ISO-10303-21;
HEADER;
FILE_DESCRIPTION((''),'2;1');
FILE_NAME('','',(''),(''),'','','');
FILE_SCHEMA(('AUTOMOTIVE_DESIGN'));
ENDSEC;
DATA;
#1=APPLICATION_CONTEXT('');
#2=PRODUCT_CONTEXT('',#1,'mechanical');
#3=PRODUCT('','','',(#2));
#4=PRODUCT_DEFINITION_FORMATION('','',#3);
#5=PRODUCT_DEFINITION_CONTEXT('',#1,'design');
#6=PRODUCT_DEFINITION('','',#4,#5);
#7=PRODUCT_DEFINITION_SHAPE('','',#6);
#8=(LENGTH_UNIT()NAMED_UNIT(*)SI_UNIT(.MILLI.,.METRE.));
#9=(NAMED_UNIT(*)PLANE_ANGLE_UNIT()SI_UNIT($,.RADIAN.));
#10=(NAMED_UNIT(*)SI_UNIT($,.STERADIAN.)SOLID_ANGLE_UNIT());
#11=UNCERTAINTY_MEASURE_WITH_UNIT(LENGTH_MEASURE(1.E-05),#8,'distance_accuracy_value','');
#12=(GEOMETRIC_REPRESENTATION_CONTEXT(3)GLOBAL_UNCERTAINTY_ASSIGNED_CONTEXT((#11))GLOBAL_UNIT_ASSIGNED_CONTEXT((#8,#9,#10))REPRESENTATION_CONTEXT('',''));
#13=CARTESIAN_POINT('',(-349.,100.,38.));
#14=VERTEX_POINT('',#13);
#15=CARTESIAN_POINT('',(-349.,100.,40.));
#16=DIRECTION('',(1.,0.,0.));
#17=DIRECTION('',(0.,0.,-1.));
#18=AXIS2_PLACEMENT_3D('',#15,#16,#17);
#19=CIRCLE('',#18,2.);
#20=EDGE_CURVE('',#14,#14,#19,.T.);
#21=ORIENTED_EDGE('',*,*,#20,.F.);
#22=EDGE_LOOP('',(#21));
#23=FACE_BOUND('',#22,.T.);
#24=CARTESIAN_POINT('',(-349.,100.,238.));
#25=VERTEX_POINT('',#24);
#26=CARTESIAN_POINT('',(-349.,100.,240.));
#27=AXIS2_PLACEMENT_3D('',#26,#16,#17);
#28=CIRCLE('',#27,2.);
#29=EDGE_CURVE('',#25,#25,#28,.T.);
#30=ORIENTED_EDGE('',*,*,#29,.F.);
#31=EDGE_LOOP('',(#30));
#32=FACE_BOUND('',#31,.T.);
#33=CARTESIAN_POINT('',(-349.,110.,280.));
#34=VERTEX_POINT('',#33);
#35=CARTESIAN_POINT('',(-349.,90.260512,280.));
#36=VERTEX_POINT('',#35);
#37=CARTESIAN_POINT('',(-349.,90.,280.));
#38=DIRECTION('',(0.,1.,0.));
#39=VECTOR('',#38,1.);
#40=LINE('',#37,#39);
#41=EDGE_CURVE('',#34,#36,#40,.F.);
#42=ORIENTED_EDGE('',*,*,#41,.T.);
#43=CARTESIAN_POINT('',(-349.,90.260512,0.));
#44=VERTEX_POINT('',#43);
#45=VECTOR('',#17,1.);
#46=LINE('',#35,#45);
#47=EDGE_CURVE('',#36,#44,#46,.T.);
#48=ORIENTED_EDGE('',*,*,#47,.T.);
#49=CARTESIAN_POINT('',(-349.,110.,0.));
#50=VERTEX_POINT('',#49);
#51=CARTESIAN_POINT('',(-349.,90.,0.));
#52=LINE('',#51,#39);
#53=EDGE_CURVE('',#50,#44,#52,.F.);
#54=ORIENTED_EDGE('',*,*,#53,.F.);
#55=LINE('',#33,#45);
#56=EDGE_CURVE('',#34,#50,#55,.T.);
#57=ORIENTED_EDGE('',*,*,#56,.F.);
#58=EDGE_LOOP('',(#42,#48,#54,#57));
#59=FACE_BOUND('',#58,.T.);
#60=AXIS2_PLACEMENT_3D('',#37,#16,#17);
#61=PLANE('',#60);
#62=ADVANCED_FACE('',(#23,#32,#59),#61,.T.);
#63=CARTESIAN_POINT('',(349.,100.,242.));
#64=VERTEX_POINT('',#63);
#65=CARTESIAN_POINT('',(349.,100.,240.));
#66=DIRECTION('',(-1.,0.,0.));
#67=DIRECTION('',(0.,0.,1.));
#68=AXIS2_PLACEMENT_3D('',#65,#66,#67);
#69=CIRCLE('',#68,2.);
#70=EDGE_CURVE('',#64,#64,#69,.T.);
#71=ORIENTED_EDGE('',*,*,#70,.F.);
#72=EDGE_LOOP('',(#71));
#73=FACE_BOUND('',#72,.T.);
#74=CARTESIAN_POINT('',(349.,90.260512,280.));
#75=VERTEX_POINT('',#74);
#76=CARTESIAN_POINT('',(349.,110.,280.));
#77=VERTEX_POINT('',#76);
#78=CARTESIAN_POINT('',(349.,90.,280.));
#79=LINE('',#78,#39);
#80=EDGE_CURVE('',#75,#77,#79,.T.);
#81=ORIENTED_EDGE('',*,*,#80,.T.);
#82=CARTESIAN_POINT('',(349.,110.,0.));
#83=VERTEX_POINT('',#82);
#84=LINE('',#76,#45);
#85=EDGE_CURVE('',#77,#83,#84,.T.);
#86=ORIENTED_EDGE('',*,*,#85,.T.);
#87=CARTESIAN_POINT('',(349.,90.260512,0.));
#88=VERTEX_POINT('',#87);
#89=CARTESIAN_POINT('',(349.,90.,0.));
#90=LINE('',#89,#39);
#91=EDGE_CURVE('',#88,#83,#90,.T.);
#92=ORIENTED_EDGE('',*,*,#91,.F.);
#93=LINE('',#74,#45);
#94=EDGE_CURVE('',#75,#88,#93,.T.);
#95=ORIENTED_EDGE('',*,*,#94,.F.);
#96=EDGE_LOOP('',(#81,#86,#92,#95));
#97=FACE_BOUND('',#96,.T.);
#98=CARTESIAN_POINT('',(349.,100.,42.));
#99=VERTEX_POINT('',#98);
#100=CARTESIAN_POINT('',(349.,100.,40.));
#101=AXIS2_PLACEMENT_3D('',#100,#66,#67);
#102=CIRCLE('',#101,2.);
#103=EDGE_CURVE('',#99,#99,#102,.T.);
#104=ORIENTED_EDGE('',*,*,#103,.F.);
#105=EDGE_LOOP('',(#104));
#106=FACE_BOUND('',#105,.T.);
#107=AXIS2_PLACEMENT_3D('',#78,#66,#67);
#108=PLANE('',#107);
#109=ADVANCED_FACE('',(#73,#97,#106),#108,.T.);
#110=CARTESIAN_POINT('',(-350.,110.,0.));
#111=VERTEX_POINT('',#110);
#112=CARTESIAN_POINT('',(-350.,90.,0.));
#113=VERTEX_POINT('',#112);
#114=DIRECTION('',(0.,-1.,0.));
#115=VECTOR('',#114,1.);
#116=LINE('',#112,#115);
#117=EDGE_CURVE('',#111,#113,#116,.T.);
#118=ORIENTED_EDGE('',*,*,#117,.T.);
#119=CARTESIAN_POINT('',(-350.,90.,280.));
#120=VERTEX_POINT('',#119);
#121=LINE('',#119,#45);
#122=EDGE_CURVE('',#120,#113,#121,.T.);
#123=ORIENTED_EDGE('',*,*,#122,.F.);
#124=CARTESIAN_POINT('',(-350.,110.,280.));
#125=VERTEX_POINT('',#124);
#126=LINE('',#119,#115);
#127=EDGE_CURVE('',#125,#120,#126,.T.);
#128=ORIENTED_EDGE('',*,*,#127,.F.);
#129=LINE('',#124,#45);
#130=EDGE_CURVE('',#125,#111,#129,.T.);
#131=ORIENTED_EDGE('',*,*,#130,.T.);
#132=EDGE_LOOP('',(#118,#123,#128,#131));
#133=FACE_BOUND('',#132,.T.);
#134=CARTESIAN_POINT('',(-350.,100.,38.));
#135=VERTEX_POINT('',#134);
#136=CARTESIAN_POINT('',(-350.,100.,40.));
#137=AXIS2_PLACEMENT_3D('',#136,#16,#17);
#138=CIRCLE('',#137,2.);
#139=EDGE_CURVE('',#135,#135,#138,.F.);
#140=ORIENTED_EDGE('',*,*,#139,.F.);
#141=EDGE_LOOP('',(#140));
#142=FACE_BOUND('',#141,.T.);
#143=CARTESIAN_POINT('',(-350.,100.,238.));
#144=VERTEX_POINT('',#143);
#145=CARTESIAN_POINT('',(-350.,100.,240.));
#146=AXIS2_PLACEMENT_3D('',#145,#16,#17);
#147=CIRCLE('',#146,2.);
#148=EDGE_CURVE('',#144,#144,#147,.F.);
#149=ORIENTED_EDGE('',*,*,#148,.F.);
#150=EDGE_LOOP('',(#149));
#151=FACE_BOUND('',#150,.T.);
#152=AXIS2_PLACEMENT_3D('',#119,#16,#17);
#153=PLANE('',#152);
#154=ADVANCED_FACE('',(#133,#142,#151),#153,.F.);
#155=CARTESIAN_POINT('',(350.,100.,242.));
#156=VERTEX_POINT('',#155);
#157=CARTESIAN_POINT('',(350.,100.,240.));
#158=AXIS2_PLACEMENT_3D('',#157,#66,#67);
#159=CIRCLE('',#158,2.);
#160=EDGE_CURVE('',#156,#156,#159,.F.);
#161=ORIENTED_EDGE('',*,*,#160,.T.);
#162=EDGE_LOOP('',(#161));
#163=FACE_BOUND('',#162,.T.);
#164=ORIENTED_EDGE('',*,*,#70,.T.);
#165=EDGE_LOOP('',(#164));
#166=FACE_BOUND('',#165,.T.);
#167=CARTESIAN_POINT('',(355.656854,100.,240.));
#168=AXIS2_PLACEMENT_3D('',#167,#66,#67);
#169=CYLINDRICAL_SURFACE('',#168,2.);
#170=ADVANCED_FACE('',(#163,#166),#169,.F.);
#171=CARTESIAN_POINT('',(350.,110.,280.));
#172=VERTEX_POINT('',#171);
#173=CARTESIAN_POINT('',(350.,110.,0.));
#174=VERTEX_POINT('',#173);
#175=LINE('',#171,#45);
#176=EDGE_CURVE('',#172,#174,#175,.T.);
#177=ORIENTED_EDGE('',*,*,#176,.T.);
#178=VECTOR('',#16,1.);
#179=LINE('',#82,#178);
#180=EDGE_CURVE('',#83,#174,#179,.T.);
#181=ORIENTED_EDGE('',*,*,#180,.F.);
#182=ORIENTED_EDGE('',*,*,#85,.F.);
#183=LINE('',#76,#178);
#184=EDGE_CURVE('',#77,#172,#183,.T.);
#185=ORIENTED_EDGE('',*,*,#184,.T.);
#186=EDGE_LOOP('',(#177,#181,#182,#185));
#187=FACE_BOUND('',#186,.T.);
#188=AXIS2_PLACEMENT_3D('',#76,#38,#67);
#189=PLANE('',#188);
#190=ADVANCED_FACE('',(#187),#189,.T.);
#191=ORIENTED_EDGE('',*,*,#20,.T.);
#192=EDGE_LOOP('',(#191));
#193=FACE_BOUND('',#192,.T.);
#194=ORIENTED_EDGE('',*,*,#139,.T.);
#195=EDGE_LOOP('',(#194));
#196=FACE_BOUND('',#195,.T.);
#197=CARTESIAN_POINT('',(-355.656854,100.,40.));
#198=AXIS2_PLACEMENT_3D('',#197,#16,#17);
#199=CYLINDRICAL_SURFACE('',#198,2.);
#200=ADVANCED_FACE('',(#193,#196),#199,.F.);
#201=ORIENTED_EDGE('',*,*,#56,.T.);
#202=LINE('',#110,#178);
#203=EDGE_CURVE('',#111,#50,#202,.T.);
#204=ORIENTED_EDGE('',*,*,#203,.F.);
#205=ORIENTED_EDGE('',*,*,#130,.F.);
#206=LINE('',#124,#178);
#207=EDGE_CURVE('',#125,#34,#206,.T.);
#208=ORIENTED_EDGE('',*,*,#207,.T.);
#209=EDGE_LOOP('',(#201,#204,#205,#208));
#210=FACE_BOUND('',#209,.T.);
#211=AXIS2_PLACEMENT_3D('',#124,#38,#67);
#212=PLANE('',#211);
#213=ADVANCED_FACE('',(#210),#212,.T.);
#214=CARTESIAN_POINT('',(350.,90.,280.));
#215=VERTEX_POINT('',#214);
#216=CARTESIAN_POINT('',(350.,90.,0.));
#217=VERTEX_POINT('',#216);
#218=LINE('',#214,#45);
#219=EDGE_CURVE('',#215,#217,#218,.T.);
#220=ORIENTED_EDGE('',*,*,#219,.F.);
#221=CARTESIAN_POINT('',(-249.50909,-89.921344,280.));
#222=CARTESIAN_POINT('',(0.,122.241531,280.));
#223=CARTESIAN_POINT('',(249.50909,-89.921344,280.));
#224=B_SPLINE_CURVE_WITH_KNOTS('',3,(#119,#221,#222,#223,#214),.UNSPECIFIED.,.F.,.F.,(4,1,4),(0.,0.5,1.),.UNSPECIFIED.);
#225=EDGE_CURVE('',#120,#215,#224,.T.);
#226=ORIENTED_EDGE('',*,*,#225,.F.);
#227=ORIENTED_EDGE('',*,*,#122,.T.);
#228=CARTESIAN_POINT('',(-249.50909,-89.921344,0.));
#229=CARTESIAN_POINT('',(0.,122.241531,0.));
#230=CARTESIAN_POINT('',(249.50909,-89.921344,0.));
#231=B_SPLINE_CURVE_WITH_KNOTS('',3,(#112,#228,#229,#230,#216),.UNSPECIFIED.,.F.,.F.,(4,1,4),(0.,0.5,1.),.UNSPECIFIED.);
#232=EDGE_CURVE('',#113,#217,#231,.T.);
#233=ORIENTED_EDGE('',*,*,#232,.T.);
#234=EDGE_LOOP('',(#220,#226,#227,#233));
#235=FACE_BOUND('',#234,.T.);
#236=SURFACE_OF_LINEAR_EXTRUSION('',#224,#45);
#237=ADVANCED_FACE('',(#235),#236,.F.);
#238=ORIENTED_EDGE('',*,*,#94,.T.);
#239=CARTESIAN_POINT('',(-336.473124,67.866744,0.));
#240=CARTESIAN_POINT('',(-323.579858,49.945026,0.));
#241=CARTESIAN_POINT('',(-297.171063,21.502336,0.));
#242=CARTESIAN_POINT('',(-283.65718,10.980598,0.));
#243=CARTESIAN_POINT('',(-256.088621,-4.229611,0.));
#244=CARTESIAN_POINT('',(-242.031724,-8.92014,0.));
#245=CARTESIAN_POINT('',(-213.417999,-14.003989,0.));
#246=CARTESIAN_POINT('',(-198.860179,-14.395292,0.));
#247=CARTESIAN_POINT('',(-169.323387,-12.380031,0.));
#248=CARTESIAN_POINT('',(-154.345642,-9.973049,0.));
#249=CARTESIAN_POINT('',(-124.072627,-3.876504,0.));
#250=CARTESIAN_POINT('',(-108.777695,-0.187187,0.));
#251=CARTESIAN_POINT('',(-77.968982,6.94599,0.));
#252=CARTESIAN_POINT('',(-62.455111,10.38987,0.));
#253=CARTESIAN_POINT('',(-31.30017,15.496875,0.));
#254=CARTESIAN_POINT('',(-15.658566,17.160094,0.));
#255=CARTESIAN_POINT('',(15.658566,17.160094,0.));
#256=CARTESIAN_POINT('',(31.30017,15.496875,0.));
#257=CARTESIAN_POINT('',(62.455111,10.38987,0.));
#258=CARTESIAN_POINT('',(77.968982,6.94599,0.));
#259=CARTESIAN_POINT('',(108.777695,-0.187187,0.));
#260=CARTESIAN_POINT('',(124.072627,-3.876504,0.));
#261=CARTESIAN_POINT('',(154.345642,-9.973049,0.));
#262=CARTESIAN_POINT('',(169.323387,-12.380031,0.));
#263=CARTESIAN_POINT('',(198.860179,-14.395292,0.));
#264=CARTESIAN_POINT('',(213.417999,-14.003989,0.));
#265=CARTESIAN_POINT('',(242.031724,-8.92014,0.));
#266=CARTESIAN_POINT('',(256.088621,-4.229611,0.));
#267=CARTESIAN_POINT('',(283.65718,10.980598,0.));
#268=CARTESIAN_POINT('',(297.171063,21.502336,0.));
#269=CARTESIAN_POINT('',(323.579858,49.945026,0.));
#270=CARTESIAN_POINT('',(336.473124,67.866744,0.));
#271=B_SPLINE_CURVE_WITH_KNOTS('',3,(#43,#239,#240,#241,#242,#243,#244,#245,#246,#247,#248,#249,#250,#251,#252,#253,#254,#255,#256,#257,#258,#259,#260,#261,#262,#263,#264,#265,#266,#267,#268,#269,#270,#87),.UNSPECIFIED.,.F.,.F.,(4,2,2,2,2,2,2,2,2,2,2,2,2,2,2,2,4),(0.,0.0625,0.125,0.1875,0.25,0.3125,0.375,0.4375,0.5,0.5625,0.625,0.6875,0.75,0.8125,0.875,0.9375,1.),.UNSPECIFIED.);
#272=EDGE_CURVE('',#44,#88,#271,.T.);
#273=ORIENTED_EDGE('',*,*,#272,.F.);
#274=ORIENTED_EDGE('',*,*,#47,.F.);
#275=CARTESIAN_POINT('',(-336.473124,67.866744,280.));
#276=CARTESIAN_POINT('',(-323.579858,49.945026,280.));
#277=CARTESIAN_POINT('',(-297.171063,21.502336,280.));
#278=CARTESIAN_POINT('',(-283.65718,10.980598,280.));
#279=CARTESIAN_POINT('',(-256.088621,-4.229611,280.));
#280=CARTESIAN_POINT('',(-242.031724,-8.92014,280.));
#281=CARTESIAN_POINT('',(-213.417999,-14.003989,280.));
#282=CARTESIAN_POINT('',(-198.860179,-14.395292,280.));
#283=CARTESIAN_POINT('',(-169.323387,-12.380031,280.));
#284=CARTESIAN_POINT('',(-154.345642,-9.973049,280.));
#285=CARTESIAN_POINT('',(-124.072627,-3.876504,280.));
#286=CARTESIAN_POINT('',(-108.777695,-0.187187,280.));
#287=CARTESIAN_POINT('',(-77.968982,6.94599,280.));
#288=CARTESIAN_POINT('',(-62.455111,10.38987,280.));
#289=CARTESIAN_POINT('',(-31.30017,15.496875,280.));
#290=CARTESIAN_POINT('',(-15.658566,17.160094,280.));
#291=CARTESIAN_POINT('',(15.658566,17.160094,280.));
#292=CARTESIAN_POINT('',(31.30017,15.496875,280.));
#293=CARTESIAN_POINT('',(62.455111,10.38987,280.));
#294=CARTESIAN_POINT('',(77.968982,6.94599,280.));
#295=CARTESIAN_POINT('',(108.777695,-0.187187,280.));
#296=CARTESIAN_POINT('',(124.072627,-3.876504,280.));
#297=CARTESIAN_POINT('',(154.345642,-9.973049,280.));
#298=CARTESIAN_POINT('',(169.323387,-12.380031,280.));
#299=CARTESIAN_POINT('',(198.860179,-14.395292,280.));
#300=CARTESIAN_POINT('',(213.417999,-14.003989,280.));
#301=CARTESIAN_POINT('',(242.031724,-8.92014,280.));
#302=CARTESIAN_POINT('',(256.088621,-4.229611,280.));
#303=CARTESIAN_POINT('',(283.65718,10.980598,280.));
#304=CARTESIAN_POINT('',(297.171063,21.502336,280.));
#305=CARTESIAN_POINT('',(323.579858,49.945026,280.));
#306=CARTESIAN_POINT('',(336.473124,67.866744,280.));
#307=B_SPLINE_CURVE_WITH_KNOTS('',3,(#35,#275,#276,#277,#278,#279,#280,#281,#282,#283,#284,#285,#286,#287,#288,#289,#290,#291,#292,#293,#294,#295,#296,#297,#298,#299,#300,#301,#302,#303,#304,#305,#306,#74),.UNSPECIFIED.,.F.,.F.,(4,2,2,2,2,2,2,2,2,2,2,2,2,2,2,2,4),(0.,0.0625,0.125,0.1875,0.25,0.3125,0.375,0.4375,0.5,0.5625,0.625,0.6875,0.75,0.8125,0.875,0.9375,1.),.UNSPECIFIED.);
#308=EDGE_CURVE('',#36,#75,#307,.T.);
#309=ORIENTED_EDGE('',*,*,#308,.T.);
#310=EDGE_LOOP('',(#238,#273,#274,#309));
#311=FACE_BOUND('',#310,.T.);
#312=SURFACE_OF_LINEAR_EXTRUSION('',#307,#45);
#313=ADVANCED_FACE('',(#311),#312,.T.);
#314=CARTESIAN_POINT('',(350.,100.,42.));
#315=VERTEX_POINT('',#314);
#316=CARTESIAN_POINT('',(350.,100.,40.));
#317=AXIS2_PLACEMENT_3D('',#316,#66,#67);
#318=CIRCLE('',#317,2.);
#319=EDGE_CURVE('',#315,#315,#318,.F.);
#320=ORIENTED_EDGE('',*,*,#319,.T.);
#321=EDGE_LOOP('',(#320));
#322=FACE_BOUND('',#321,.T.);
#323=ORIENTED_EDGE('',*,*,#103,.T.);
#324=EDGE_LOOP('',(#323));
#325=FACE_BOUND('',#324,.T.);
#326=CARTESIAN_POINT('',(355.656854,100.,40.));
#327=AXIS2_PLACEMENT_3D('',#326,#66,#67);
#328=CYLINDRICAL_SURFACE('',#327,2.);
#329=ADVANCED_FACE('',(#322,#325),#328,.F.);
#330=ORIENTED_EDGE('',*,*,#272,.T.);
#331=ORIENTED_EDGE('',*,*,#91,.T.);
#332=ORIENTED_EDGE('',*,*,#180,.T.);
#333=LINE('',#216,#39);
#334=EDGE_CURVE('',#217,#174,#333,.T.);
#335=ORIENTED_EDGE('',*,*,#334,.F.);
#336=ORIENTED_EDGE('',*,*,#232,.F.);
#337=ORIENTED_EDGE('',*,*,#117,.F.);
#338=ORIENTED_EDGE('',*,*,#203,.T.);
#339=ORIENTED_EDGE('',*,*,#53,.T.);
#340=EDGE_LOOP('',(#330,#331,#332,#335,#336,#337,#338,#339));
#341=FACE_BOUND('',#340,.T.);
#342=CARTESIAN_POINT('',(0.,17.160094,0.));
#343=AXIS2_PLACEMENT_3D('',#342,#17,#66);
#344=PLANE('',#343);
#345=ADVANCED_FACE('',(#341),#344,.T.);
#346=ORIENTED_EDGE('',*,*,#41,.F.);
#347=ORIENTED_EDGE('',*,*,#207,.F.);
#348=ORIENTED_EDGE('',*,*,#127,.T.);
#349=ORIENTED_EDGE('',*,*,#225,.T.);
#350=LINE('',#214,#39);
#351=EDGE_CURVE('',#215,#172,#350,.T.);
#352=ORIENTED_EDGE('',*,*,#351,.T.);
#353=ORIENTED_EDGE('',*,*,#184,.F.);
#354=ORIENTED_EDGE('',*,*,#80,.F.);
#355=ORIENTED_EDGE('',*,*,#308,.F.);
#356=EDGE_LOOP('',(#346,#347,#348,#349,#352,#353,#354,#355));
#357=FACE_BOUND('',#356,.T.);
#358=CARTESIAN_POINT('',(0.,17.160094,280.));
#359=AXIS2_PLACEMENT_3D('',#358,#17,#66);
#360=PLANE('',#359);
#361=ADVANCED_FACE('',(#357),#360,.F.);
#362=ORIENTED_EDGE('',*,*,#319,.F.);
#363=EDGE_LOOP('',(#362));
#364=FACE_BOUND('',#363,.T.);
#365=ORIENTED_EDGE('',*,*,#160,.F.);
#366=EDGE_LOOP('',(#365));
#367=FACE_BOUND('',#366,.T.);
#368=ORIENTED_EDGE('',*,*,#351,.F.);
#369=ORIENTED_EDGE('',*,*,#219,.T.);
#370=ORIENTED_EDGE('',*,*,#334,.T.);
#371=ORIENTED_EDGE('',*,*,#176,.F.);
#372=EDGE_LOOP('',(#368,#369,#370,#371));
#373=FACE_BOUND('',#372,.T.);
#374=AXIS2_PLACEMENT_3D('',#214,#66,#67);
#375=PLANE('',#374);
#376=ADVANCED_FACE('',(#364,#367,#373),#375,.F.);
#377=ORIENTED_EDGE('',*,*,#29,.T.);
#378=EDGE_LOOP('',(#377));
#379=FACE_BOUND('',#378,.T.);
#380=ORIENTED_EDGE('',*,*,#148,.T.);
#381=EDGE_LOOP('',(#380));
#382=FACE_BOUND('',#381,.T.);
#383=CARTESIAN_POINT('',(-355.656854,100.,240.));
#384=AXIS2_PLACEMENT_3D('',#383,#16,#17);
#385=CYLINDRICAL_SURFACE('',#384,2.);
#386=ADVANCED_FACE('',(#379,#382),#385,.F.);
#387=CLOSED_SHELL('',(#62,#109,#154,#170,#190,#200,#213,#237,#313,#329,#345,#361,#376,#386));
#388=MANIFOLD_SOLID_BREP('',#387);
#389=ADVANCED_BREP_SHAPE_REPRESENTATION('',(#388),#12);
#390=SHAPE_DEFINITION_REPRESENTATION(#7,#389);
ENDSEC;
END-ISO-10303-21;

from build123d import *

# Parameters (mm, degrees)
EXTRUIR_L_MINA1_DEPTH = 280
CROQUIS2_R            = 2
CORTAR_EXTRUIR1_DEPTH = 1
CORTAR_EXTRUIR2_START = -1
CROQUIS3_R            = 2
CORTAR_EXTRUIR2_DEPTH = 1


# Read off the part's stored shape, not the designer's step: Extruir-Lámina1
with BuildPart() as part:
    # Extruir-Lámina1 outline → Extruir-Lámina1 (new body)
    with BuildSketch(Plane.XY):
        with BuildLine():
            Line((350, 90), (350, 110))
            Line((350, 110), (349, 110))
            Line((349, 110), (349, 90.260511983))
            add(Edge.make_bspline(
                [(-349, 90.260511983), (-336.473123725, 67.866744435), (-323.579857538, 49.945026129), (-297.171063329, 21.502335818), (-283.657179578, 10.980597978), (-256.08862116, -4.229610631), (-242.031723713, -8.920140346), (-213.417998998, -14.003988921), (-198.860178523, -14.395291938), (-169.323386859, -12.380030559), (-154.345642249, -9.973049186), (-124.072626635, -3.876504048), (-108.777695252, -0.187186876), (-77.968981739, 6.945990423), (-62.455111312, 10.389870381), (-31.300170229, 15.496875407), (-15.658565807, 17.160093585), (15.658565807, 17.160093585), (31.300170229, 15.496875407), (62.455111312, 10.389870381), (77.968981739, 6.945990423), (108.777695252, -0.187186876), (124.072626635, -3.876504048), (154.345642249, -9.973049186), (169.323386859, -12.380030559), (198.860178523, -14.395291938), (213.417998998, -14.003988921), (242.031723713, -8.920140346), (256.08862116, -4.229610631), (283.657179578, 10.980597978), (297.171063329, 21.502335818), (323.579857538, 49.945026129), (336.473123725, 67.866744435), (349, 90.260511983)],
                knots=[0, 0, 0, 0, 0.0625, 0.0625, 0.125, 0.125, 0.1875, 0.1875, 0.25, 0.25, 0.3125, 0.3125, 0.375, 0.375, 0.4375, 0.4375, 0.5, 0.5, 0.5625, 0.5625, 0.625, 0.625, 0.6875, 0.6875, 0.75, 0.75, 0.8125, 0.8125, 0.875, 0.875, 0.9375, 0.9375, 1, 1, 1, 1], degree=3))
            Line((-349, 90.260511983), (-349, 110))
            Line((-349, 110), (-350, 110))
            Line((-350, 110), (-350, 90))
            add(Edge.make_bspline(
                [(-350, 90), (-249.509090089, -89.921344309), (0, 122.241531478), (249.509090089, -89.921344309), (350, 90)],
                knots=[0, 0, 0, 0, 0.5, 1, 1, 1, 1], degree=3))
        make_face()
    extrude(amount=EXTRUIR_L_MINA1_DEPTH)

    # Croquis2 → Cortar-Extruir1 (cut)
    with BuildSketch(Plane(origin=(-349, 0, 0), x_dir=(0, 0, -1), z_dir=(1, 0, 0))):
        with Locations((-240, 100)):
            Circle(CROQUIS2_R)
        with Locations((-40, 100)):
            Circle(CROQUIS2_R)
    extrude(amount=-CORTAR_EXTRUIR1_DEPTH, mode=Mode.SUBTRACT)

    # Croquis3 → Cortar-Extruir2 (cut)
    with BuildSketch(Plane.ZY.offset(-349).offset(CORTAR_EXTRUIR2_START)):
        with Locations(Location((40, 100, 0), (0, 0, 180))):
            Circle(CROQUIS3_R)
        with Locations(Location((240, 100, 0), (0, 0, 180))):
            Circle(CROQUIS3_R)
    extrude(amount=CORTAR_EXTRUIR2_DEPTH, mode=Mode.SUBTRACT)


solid = part.part
